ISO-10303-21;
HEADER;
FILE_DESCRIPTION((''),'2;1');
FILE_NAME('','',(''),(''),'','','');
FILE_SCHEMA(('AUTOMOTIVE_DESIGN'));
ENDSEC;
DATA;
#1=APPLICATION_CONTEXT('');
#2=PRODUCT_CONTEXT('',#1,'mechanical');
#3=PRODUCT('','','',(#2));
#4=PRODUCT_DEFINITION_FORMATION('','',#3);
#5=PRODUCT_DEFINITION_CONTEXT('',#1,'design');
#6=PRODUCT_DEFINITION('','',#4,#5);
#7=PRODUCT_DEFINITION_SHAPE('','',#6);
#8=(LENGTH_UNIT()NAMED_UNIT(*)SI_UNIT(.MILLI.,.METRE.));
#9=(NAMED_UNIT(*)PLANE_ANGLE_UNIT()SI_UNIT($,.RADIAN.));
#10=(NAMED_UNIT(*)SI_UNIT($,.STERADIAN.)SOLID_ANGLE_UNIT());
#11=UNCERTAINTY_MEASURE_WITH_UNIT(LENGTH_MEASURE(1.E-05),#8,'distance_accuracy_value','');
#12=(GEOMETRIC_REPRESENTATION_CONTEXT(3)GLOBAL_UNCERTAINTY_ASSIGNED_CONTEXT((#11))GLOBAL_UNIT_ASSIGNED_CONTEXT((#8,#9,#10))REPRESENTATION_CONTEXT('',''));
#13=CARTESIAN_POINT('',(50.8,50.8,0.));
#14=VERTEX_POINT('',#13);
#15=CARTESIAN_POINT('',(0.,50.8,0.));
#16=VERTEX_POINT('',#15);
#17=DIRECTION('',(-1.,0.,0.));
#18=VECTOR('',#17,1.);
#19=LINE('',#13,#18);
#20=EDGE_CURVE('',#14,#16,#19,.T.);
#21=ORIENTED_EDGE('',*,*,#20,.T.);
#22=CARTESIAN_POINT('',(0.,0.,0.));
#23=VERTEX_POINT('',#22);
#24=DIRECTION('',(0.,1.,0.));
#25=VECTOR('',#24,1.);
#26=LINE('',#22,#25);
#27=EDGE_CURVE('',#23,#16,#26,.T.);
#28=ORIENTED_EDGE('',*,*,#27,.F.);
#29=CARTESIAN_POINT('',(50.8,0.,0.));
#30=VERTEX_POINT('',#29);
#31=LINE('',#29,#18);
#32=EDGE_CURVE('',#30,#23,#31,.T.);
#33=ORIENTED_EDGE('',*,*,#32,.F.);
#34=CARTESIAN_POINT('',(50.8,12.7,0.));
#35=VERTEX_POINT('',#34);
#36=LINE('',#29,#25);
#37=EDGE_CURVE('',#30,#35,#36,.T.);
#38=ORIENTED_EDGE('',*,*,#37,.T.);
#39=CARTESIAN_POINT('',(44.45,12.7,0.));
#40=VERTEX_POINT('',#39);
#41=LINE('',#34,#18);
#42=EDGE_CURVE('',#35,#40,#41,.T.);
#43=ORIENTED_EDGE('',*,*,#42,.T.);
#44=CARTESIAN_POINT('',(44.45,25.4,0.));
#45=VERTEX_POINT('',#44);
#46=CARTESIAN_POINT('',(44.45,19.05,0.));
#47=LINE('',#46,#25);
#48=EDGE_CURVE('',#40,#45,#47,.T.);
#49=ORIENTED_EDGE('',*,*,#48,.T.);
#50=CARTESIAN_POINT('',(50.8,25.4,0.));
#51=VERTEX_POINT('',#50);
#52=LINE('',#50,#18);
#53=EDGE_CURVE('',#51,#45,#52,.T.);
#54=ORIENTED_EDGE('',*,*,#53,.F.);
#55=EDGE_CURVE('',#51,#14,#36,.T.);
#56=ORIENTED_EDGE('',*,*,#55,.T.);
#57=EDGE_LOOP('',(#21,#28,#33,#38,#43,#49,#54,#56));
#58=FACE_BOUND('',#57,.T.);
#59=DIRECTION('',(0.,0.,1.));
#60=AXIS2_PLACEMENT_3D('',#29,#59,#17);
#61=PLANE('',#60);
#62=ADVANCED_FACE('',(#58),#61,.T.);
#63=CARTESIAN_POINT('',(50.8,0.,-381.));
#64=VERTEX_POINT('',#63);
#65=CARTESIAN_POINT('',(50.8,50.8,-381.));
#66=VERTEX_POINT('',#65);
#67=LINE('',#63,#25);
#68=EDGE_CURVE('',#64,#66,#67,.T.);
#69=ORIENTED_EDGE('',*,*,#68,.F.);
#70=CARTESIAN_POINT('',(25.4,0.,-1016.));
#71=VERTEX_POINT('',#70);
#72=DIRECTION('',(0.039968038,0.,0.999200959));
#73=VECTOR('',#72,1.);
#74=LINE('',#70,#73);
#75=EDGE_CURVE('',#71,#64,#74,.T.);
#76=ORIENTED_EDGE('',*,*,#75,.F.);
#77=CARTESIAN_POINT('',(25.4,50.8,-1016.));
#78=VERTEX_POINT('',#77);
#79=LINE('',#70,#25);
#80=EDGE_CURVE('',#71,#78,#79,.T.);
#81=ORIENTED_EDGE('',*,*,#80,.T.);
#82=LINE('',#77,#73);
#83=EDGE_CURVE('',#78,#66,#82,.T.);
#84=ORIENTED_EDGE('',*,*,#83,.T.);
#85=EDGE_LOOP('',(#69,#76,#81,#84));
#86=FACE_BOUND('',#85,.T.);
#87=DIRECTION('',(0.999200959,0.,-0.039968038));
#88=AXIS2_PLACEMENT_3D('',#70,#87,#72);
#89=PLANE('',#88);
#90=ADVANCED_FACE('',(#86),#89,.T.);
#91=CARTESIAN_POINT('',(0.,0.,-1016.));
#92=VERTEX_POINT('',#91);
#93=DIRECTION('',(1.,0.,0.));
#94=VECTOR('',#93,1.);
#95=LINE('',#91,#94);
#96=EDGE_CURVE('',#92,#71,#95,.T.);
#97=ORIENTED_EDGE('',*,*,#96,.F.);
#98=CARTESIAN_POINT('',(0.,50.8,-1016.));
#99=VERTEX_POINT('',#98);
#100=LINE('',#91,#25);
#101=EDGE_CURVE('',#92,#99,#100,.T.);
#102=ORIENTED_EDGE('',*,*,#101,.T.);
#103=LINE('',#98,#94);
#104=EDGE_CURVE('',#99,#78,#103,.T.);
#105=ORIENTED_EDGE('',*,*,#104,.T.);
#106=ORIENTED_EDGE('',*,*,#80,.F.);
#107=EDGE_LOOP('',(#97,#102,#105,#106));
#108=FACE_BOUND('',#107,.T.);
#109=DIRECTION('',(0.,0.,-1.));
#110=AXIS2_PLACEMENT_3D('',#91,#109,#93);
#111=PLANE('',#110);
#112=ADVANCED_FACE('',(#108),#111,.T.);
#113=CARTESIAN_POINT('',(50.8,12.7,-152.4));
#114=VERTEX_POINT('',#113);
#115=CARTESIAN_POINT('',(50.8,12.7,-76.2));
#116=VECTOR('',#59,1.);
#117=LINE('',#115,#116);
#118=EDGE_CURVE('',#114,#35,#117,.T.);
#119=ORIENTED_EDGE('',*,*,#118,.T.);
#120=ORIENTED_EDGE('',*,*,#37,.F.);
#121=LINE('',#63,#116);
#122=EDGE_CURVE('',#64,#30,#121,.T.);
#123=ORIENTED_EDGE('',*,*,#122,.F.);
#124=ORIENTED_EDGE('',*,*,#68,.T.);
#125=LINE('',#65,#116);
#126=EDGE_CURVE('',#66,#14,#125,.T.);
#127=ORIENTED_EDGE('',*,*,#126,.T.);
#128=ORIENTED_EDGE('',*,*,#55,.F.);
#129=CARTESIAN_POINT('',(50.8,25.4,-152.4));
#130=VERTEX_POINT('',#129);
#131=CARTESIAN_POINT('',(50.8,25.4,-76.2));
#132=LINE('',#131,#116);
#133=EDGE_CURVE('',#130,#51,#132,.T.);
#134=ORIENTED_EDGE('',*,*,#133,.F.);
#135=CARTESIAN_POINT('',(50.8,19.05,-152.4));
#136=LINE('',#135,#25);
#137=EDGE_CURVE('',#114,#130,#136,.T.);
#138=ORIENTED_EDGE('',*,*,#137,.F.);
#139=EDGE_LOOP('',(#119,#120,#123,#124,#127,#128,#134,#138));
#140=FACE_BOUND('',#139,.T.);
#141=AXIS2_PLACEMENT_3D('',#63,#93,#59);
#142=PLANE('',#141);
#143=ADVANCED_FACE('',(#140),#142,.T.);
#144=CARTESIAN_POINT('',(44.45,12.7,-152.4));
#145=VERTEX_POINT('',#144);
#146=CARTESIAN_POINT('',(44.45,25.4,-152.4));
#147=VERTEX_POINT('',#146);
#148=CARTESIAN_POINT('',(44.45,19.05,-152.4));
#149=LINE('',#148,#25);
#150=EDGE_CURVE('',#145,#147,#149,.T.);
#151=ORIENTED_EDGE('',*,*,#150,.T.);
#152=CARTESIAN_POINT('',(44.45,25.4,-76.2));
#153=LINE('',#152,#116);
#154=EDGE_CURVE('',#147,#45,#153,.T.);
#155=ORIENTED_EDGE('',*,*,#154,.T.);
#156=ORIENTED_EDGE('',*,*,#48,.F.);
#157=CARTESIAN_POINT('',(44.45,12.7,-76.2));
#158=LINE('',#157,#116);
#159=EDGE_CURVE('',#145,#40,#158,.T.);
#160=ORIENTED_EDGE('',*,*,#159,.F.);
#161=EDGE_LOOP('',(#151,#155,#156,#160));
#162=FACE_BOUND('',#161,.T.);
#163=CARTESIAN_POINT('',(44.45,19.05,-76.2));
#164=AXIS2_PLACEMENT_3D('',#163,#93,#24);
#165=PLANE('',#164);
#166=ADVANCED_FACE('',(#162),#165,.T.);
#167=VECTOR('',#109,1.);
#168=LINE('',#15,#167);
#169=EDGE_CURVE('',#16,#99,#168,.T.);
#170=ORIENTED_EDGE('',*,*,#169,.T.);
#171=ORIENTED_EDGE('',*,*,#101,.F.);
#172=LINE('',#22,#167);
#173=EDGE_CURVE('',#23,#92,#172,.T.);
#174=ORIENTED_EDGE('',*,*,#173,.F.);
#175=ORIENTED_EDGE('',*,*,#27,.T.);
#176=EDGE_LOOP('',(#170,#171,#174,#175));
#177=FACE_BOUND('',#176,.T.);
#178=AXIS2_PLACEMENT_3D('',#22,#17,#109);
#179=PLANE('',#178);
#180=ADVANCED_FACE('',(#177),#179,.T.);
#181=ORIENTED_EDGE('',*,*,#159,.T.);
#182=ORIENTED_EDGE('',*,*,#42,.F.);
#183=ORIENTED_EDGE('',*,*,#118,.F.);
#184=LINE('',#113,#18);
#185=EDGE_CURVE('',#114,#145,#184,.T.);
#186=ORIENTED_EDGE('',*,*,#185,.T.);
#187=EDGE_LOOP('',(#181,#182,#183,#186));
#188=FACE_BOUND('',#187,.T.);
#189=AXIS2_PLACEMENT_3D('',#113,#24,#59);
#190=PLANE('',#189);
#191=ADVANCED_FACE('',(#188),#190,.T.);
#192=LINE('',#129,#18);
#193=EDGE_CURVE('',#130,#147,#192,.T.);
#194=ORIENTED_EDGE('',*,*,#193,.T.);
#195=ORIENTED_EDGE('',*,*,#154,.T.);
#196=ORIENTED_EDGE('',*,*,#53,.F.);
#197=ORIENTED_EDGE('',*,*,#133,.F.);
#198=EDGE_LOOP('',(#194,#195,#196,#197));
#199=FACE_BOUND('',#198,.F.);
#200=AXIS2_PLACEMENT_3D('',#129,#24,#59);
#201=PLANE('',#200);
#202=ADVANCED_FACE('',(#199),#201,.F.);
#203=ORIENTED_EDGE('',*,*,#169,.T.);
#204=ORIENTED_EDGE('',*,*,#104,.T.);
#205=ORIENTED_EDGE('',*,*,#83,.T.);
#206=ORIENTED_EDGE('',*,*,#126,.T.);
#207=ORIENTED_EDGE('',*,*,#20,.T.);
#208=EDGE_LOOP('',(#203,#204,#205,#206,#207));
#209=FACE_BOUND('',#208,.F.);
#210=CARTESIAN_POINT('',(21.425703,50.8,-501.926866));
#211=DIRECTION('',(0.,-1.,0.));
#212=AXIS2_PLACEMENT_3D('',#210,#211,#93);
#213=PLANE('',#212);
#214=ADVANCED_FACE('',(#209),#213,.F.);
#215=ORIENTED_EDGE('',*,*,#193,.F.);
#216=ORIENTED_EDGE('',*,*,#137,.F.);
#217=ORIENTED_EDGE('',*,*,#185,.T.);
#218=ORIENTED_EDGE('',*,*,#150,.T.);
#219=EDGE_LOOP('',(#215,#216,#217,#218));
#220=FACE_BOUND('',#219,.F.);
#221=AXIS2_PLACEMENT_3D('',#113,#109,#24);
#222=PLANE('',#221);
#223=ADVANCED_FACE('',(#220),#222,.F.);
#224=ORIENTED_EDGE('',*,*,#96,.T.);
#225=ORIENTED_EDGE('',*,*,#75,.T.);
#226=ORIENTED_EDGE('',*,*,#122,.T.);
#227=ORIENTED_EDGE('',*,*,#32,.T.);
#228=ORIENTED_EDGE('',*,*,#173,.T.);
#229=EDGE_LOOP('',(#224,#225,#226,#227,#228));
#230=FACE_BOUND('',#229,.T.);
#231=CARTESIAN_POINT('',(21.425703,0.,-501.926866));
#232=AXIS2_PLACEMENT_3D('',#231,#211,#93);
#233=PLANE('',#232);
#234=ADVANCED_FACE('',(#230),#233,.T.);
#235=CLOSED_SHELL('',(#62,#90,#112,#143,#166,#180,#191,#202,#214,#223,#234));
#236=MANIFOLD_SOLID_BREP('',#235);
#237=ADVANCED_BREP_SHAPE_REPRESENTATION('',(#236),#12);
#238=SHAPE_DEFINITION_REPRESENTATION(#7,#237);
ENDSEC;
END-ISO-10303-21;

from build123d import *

# Parameters (mm, degrees)
F1_DEPTH = 50.8
F2_W     = 12.7
F2_H     = 152.4
F3_DEPTH = 6.35


# Not quite as in the source:
# - a feature names something its author has since deleted; it is built from what else it names


with BuildPart() as f1:
    # F0 (on Front) → F1 (new body)
    with BuildSketch(Plane.XZ):
        Polygon((50.8, 0), (0, 0), (0, -1016), (25.4, -1016), (50.8, -381), align=None)
    extrude(amount=-F1_DEPTH)

    # F2 (on face) → F3 (cut)
    with BuildSketch(Plane.YZ.offset(50.8)):
        with Locations((19.05, -76.2)):
            Rectangle(F2_W, F2_H)
    extrude(amount=-F3_DEPTH, mode=Mode.SUBTRACT)


solid = f1.part
